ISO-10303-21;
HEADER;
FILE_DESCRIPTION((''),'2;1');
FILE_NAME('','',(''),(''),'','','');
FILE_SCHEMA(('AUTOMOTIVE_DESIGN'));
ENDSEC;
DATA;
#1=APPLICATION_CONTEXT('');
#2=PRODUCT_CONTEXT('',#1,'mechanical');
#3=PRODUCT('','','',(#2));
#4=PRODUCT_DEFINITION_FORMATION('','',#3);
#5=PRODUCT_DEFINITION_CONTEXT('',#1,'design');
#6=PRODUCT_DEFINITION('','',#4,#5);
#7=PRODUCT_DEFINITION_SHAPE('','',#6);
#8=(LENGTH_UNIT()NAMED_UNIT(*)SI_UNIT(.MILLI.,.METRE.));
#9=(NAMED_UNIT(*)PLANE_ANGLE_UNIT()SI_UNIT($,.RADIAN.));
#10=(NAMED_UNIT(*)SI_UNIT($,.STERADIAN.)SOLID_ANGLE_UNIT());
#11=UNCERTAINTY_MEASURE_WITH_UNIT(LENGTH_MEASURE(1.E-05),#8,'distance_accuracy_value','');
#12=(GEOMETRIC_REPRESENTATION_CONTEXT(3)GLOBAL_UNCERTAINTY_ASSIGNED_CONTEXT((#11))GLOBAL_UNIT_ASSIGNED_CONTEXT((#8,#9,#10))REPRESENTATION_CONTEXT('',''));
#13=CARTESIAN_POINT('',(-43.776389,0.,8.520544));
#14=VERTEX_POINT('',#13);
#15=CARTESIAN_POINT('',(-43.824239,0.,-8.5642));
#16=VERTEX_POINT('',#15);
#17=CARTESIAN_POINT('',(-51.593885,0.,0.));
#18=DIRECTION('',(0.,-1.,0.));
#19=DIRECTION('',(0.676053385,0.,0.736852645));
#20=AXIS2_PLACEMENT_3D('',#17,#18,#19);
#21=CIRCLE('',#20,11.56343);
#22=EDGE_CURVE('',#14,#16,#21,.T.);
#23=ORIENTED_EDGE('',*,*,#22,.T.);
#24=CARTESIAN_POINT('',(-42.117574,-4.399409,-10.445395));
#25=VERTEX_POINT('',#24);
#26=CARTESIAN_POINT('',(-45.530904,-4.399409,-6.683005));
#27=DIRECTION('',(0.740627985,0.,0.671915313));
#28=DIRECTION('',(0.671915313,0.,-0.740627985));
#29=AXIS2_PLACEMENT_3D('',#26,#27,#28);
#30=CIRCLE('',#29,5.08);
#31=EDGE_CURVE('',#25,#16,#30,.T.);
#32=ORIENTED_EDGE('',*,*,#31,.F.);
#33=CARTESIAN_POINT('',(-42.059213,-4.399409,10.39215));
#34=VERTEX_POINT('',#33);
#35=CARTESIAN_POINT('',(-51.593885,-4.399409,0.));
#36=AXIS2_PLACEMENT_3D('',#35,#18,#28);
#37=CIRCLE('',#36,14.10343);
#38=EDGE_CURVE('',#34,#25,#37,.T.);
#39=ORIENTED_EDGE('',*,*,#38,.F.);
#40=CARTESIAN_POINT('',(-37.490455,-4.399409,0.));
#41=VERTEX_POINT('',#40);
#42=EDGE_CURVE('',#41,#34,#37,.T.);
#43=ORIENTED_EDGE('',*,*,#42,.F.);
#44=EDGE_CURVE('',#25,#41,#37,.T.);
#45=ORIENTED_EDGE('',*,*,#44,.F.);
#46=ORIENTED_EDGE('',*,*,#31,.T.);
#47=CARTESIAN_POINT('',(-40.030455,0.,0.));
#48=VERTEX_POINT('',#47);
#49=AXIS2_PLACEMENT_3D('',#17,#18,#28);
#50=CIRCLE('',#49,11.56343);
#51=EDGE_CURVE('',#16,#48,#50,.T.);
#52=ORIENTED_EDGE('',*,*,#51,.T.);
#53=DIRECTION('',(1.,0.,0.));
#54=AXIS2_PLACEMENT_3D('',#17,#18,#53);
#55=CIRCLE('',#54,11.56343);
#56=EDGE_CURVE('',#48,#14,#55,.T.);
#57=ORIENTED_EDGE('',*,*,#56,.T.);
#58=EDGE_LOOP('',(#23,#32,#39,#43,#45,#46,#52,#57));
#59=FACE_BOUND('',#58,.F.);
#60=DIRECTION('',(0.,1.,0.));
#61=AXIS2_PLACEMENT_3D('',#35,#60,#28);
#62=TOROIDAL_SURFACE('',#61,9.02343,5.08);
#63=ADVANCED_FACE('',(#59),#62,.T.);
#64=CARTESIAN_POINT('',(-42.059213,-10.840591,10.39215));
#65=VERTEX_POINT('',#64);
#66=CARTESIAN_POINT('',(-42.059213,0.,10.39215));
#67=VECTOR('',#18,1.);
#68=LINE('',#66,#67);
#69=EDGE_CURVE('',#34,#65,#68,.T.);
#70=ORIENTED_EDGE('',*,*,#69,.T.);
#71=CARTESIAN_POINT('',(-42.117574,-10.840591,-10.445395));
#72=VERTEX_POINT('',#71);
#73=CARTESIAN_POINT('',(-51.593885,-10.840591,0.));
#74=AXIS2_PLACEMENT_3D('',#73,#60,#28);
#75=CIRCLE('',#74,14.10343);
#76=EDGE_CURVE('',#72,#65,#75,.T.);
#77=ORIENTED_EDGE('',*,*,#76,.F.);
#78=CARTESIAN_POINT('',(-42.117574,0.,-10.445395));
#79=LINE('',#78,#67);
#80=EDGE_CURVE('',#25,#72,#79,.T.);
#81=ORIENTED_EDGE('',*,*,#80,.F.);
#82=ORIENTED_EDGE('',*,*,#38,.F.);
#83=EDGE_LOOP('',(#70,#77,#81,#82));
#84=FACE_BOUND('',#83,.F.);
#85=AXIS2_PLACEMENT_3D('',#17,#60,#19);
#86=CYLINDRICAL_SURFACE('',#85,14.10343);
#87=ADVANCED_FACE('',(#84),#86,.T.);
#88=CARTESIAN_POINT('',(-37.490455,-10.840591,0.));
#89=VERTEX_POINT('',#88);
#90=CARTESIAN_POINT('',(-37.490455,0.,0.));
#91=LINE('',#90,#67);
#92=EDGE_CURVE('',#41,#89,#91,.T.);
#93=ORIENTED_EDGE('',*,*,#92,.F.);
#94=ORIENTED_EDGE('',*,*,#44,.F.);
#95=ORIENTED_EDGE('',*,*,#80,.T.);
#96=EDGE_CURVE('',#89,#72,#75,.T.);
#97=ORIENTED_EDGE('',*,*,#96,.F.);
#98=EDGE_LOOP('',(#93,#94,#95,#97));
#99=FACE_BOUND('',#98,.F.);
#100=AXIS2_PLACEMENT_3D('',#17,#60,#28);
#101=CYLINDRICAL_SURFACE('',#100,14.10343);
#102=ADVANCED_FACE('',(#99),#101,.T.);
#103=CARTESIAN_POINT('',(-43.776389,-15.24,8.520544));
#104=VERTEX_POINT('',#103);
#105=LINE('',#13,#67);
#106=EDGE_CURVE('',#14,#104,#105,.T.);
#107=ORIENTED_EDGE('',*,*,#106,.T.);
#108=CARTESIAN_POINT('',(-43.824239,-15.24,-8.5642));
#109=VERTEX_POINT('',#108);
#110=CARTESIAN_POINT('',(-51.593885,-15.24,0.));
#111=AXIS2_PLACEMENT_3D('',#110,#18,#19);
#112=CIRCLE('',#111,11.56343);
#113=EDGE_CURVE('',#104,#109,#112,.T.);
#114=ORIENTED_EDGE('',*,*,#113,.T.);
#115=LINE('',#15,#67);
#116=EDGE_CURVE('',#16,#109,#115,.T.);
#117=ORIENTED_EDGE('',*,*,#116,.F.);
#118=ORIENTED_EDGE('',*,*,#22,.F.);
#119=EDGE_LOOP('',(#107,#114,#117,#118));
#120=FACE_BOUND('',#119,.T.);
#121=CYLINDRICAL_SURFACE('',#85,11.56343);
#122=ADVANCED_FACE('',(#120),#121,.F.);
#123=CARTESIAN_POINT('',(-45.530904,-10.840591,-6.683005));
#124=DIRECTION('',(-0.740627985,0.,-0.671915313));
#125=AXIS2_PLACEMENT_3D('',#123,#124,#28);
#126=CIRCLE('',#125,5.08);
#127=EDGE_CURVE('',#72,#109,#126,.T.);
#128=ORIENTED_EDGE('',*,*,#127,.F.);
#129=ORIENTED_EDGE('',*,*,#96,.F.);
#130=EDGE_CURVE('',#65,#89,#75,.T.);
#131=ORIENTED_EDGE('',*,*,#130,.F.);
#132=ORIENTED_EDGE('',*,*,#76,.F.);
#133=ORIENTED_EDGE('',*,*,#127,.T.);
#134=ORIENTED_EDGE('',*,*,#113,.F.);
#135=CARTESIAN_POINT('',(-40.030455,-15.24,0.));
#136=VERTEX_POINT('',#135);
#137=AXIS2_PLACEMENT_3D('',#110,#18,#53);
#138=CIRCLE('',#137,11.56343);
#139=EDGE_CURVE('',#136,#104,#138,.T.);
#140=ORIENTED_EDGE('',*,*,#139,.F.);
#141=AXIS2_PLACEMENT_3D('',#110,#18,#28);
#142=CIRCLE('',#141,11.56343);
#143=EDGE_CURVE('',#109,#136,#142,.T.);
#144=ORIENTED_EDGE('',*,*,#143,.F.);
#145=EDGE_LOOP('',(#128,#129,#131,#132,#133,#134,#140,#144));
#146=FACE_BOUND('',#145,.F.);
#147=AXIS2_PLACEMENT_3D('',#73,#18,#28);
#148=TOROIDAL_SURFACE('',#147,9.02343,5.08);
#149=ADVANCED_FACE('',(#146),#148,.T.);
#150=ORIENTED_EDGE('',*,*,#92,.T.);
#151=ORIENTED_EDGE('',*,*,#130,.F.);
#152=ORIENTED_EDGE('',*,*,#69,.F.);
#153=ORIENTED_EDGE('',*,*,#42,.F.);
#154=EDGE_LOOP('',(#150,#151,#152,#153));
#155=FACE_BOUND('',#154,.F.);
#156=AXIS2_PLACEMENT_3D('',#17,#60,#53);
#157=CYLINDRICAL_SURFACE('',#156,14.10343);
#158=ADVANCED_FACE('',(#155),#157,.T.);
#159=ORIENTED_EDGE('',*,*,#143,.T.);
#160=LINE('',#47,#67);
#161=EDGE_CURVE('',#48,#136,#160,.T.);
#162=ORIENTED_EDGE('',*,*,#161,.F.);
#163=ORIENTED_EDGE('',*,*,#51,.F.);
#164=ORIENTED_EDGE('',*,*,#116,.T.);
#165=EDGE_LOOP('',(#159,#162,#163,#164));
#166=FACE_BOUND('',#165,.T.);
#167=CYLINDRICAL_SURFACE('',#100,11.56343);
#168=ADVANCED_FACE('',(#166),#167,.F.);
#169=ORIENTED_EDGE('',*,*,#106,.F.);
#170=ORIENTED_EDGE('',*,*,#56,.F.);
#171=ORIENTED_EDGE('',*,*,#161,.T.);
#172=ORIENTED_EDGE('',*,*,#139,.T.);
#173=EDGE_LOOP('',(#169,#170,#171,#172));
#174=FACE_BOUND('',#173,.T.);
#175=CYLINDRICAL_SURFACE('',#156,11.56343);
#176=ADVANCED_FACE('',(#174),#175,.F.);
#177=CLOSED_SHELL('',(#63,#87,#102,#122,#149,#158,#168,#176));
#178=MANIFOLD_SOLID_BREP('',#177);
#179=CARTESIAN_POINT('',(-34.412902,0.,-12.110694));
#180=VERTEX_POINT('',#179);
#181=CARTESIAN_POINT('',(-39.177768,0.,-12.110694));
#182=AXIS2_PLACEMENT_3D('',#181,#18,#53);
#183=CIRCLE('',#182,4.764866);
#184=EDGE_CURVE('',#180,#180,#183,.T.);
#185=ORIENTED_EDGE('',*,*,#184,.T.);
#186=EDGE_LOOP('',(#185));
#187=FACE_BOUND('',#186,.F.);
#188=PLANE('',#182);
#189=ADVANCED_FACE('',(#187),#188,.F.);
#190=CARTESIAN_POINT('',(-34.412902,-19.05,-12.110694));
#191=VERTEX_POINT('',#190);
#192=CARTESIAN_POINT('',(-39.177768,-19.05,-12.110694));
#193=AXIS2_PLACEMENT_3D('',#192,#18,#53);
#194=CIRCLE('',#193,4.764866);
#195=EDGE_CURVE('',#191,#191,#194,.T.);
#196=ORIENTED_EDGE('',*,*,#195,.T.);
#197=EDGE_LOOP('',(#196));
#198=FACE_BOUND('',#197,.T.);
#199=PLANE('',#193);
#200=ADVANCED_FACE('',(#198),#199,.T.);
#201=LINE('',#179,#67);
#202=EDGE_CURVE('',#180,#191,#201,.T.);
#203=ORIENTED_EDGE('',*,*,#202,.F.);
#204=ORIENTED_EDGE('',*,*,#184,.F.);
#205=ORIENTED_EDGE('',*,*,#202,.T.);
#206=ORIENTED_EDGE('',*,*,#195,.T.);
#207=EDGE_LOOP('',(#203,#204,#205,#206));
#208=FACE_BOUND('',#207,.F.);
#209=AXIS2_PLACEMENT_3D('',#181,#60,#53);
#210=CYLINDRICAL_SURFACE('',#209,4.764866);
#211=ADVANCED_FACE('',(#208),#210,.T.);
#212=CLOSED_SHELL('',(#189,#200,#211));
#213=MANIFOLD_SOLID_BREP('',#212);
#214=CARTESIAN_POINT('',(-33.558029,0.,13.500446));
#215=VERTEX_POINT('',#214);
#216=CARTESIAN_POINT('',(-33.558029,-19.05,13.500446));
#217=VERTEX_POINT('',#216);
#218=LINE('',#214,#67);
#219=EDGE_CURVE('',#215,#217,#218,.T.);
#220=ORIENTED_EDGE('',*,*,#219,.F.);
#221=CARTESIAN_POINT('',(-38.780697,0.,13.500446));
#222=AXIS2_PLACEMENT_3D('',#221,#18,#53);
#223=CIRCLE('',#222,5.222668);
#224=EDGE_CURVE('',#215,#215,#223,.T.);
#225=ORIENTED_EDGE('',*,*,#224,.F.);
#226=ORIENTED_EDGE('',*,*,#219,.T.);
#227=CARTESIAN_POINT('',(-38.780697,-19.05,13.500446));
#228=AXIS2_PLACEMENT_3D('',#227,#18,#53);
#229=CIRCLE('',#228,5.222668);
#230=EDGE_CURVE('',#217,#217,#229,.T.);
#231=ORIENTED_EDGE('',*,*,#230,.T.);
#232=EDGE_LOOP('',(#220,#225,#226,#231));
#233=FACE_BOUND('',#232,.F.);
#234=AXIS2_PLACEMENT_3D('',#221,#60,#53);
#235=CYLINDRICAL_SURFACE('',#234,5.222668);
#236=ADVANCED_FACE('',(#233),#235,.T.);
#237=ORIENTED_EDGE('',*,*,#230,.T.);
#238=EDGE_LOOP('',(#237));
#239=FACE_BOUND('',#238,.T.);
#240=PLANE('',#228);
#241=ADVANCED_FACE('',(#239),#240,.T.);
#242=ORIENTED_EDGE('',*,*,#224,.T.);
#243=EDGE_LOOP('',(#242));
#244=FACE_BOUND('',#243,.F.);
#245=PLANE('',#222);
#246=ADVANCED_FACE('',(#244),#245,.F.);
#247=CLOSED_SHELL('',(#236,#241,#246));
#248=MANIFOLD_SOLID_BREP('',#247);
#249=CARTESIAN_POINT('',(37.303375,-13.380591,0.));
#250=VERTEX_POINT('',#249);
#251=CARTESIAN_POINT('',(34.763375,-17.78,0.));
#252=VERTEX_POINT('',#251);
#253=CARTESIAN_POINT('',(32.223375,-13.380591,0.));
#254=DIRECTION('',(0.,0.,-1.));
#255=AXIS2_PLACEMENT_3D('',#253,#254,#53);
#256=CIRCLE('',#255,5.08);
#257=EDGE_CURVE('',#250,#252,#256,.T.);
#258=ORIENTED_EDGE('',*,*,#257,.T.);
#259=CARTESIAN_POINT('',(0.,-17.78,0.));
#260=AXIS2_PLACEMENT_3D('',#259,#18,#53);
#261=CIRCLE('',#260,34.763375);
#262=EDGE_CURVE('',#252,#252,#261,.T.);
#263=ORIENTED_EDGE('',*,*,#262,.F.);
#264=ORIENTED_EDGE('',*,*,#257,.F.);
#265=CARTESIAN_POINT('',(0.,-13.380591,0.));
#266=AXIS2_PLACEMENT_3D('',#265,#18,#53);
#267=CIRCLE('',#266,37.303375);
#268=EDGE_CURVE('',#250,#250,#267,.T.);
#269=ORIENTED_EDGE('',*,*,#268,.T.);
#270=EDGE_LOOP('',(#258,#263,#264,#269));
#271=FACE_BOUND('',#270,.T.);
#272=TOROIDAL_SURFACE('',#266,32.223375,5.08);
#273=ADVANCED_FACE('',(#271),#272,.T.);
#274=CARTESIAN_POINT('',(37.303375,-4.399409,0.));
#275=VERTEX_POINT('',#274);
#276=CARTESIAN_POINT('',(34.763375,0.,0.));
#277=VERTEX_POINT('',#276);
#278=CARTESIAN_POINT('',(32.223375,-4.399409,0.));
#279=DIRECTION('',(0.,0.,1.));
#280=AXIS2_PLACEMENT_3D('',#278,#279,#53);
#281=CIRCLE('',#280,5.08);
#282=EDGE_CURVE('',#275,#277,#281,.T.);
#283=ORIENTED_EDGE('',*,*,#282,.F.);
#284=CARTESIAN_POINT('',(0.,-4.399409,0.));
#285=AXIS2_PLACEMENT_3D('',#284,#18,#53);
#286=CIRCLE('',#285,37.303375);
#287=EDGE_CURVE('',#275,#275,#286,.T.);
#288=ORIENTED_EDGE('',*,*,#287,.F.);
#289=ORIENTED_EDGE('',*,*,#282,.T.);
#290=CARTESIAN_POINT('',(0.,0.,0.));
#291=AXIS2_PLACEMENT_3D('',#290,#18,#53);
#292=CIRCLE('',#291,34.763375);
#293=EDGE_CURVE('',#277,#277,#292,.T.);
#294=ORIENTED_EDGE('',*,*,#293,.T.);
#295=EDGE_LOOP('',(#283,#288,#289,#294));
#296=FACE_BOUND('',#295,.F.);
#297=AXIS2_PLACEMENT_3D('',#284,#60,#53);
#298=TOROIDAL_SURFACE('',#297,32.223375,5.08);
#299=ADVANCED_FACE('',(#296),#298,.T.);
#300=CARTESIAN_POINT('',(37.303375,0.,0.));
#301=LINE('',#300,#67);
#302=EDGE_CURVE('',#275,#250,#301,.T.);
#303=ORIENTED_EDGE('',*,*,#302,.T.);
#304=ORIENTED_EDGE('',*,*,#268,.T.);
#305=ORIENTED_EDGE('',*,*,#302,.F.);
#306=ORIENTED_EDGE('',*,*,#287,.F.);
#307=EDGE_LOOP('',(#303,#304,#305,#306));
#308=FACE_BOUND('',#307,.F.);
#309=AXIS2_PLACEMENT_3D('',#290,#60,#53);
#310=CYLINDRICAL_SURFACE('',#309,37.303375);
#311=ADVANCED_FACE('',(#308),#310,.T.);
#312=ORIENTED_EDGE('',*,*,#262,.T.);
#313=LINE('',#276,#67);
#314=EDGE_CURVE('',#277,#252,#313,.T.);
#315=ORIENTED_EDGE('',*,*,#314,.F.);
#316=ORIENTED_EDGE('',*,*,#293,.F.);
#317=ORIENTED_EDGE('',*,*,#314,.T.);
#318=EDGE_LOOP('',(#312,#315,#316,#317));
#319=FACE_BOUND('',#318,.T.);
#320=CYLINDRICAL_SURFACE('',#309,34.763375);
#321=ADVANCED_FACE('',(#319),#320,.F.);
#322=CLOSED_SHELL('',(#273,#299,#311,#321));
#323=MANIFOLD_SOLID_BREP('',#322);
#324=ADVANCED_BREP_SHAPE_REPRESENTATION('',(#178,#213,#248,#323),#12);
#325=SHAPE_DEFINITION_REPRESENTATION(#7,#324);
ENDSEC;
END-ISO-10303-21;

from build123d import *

# Parameters (mm, degrees)
F0_R     = 37.3033746103
F1_DEPTH = 17.78
F3_DEPTH = 15.24
F4_T     = -2.54
F6_R     = 5.22266797
F7_DEPTH = 19.05
F6_R_2   = 4.7648660839
F8_T     = -2.54


# Not quite as in the source:
# - a fillet or chamfer that OpenCascade refuses, or shapes differently, is made with other operations: its cross-section is extruded or revolved along the edge and cut away or added


with BuildPart() as f1:
    # F0 (on Front) → F1 (new body)
    with BuildSketch(Plane.XZ):
        Circle(F0_R)
    extrude(amount=F1_DEPTH)

    # F8
    f8_openings = [f1.faces().sort_by_distance(p)[0] for p in [
        (0, -17.78, 0),
        (0, 0, 0),
    ]]
    offset(amount=F8_T, openings=f8_openings)

    # F9: fillet of radius 5.08 on 2 edges, made by hand

    # F9_s1 → F9_t2 (revolve, cut)
    with BuildSketch(Plane.XY):
        with BuildLine():
            ThreePointArc((37.3033746103, -4.3994090512), (36.6227836615, -1.8594090512), (34.7633746103, 0))
            Line((34.7633746103, 0), (37.3033746103, 0))
            Line((37.3033746103, 0), (37.3033746103, -4.3994090512))
        make_face()
    revolve(axis=Axis((0, 0, 0), (0, -1, 0)), mode=Mode.SUBTRACT)

    # F9_s3 → F9_t4 (revolve, cut)
    with BuildSketch(Plane.XY):
        with BuildLine():
            ThreePointArc((37.3033746103, -13.3805909488), (36.6227836615, -15.9205909488), (34.7633746103, -17.78))
            Line((34.7633746103, -17.78), (37.3033746103, -17.78))
            Line((37.3033746103, -17.78), (37.3033746103, -13.3805909488))
        make_face()
    revolve(axis=Axis((0, -17.78, 0), (0, -1, 0)), mode=Mode.SUBTRACT)


with BuildPart() as f3:
    # F2 (on Front) → F3 (new body)
    with BuildSketch(Plane.XZ):
        with BuildLine():
            ThreePointArc((-42.1175740598, -10.4453951378), (-38.6990169823, -5.7121912273), (-37.490454558, 0))
            ThreePointArc((-37.490454558, 0), (-38.6830691319, 5.6760535089), (-42.059213055, 10.3921498998))
            ThreePointArc((-42.059213055, 10.3921498998), (-65.6972597782, 0.039500197), (-42.1175740598, -10.4453951378))
        make_face()
    extrude(amount=F3_DEPTH)

    # F4
    f4_openings = [f3.faces().sort_by_distance(p)[0] for p in [
        (-51.593885, -15.24, 0),
        (-51.593885, 0, 0),
    ]]
    offset(amount=F4_T, openings=f4_openings)

    # F5: fillet of radius 5.08 on 2 edges, made by hand

    # F5_s1 → F5_t2 (revolve, cut)
    with BuildSketch(Plane(origin=(-28.300783936, 0, -25.6751439232), x_dir=(0, 1, 0), z_dir=(-0.7406279848, 0, -0.6719153132))):
        with BuildLine():
            ThreePointArc((-4.3994090512, -20.5632910156), (-1.8594090512, -21.2438819644), (0, -23.1032910156))
            Line((0, -23.1032910156), (0, -20.5632910156))
            Line((0, -20.5632910156), (-4.3994090512, -20.5632910156))
        make_face()
    revolve(axis=Axis((-51.5938848257, 0, 0), (0, -1, 0)), mode=Mode.SUBTRACT)

    # F5_s3 → F5_t4 (revolve, cut)
    with BuildSketch(Plane(origin=(-28.300783936, 0, -25.6751439232), x_dir=(0, 1, 0), z_dir=(0.7406279848, 0, 0.6719153132))):
        with BuildLine():
            ThreePointArc((-10.8405909488, 20.5632910156), (-13.3805909488, 21.2438819644), (-15.24, 23.1032910156))
            Line((-15.24, 23.1032910156), (-15.24, 20.5632910156))
            Line((-15.24, 20.5632910156), (-10.8405909488, 20.5632910156))
        make_face()
    revolve(axis=Axis((-51.5938848257, -15.24, 0), (0, 1, 0)), mode=Mode.SUBTRACT)


with BuildPart() as f7:
    # F6 (on Front) → F7 (new body)
    with BuildSketch(Plane.XZ):
        with Locations((-38.7806966901, 13.5004464537)):
            Circle(F6_R)
    extrude(amount=F7_DEPTH)


with BuildPart() as f7b:
    # F6 (on Front) → F7, piece 2 (new body)
    with BuildSketch(Plane.XZ):
        with Locations((-39.1777679324, -12.1106943116)):
            Circle(F6_R_2)
    extrude(amount=F7_DEPTH)


solid = Compound([f1.part, f3.part, f7.part, f7b.part])
